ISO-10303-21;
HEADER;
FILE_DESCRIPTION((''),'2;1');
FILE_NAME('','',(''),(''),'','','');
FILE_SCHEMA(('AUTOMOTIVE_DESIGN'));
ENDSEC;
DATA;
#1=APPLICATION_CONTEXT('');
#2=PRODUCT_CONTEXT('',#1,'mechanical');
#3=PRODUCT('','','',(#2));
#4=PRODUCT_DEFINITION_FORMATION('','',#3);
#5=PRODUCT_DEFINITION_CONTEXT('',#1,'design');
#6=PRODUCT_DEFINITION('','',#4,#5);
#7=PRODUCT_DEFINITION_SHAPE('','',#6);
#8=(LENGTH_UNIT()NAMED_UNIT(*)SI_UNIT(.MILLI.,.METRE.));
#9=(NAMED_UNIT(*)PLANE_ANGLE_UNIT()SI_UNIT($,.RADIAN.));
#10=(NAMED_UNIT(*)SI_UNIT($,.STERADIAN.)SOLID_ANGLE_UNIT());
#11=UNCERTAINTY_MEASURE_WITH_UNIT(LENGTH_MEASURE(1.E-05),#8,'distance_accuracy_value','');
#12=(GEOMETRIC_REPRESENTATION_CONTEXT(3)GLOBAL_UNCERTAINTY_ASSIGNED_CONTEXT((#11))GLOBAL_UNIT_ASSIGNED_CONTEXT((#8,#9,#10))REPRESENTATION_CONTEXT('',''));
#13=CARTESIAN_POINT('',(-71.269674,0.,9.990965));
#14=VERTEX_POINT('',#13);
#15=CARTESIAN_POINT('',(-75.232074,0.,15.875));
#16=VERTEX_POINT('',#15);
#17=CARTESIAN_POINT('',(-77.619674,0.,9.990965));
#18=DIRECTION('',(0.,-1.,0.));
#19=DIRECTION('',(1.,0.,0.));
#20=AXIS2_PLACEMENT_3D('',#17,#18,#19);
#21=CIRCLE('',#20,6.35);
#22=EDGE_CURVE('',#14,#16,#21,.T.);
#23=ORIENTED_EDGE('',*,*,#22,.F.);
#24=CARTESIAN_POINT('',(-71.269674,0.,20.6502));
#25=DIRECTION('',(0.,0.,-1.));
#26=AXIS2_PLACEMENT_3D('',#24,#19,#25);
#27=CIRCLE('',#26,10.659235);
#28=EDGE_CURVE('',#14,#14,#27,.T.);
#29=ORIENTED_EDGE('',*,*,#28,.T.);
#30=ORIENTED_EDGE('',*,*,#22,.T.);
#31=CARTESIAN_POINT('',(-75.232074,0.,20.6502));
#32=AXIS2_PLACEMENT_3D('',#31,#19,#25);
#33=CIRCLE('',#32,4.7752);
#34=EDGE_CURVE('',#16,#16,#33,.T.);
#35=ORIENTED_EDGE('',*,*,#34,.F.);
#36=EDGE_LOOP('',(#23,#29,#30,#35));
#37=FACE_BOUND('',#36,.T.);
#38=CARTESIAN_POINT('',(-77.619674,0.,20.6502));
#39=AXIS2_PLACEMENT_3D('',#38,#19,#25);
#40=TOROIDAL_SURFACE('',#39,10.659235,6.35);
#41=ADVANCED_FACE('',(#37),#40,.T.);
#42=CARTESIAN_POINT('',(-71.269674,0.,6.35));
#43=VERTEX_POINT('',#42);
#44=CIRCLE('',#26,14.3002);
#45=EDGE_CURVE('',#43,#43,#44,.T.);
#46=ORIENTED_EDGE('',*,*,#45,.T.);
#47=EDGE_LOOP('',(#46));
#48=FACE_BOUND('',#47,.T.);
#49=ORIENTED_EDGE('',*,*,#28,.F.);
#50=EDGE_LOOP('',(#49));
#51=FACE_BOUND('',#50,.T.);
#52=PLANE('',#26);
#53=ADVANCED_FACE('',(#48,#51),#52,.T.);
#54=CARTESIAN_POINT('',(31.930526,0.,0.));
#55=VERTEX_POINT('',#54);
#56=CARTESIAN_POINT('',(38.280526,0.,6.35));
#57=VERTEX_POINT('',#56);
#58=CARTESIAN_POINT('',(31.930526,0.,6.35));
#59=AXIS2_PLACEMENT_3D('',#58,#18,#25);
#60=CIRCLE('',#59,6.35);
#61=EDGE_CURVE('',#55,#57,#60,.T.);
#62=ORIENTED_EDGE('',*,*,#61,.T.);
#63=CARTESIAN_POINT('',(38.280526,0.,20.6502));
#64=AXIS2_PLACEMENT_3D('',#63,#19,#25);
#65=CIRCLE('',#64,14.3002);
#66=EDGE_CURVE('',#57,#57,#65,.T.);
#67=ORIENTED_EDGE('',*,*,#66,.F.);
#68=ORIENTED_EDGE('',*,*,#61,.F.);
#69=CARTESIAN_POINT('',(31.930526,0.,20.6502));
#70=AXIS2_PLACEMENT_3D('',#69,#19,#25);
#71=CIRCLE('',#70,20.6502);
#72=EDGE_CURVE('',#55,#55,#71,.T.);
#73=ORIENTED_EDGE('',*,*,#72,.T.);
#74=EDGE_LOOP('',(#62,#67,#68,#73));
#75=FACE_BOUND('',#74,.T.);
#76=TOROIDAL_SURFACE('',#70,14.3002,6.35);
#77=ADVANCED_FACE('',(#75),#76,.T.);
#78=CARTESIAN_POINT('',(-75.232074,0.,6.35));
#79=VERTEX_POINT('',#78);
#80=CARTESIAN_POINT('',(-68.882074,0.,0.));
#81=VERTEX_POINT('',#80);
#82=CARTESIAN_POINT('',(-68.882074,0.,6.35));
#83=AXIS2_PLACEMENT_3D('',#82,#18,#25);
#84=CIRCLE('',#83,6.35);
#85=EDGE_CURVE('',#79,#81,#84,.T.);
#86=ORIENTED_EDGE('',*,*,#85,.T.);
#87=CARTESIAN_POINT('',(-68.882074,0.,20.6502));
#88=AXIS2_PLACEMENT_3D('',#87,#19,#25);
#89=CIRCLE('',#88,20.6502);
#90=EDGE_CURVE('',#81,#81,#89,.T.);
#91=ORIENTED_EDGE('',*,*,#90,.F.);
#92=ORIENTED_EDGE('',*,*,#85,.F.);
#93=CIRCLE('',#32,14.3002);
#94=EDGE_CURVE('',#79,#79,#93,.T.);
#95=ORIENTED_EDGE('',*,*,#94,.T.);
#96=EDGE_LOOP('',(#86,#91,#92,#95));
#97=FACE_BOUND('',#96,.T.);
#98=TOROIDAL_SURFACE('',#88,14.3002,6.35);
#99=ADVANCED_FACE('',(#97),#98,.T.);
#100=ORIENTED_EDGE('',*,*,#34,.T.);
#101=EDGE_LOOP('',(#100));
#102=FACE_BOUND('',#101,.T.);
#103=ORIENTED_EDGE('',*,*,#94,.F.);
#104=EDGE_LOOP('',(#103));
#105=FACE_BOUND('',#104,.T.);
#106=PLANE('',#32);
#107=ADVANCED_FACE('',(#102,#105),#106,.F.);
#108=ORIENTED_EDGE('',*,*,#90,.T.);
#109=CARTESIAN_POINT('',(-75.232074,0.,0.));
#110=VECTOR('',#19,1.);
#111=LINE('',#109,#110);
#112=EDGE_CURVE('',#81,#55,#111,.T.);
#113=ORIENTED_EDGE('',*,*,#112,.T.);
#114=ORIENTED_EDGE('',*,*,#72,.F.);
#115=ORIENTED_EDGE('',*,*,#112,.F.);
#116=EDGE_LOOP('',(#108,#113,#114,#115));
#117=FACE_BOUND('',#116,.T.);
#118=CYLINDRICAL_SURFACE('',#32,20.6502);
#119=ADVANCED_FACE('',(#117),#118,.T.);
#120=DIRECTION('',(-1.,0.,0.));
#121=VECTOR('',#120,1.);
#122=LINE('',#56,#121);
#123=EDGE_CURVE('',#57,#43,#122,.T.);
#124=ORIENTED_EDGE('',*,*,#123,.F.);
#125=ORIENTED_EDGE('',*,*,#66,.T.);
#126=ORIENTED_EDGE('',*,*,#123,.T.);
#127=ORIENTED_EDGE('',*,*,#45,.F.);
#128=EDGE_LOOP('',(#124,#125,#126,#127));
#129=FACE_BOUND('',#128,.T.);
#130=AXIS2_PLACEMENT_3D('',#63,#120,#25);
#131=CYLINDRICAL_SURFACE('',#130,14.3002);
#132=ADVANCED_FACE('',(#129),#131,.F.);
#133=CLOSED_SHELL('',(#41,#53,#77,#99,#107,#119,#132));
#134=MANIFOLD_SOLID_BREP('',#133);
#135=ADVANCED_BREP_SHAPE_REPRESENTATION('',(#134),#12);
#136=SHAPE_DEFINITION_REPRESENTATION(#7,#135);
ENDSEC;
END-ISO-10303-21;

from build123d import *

# Parameters (mm, degrees)
F3_R = 6.35


# Not quite as in the source:
# - a fillet or chamfer that OpenCascade refuses, or shapes differently, is made with other operations: its cross-section is extruded or revolved along the edge and cut away or added


with BuildPart() as f1:
    # F0 (on Front) → F1 (revolve)
    with BuildSketch(Plane.XZ):
        Polygon((-75.2320736647, 15.875), (-75.2320736647, 0), (38.2805263353, 0), (38.2805263353, 6.35), (-71.0156736647, 6.35), (-71.2696736647, 6.35), (-71.2696736647, 15.875), align=None)
    revolve(axis=Axis((-17.1681363136, 0, 20.6502), (1, 0, 0)))

    # F2: fillet of radius 6.35 on 2 edges, made by hand

    # F2_s1 → F2_t2 (revolve, cut)
    with BuildSketch(Plane.XZ):
        with BuildLine():
            ThreePointArc((31.9305263353, 0), (36.4206543959, 1.8598719395), (38.2805263353, 6.35))
            Line((38.2805263353, 6.35), (38.2805263353, 0))
            Line((38.2805263353, 0), (31.9305263353, 0))
        make_face()
    revolve(axis=Axis((38.2805263353, 0, 20.6502), (1, 0, 0)), mode=Mode.SUBTRACT)

    # F2_s3 → F2_t4 (revolve, cut)
    with BuildSketch(Plane.XZ):
        with BuildLine():
            ThreePointArc((-71.2696736647, 9.9909651395), (-72.3526175609, 13.5378821106), (-75.2320736647, 15.875))
            Line((-75.2320736647, 15.875), (-71.2696736647, 15.875))
            Line((-71.2696736647, 15.875), (-71.2696736647, 9.9909651395))
        make_face()
    revolve(axis=Axis((-71.2696736647, 0, 20.6502), (1, 0, 0)), mode=Mode.SUBTRACT)

    # F3
    f3_edges = [f1.edges().sort_by_distance(p)[0] for p in [
        (-75.232074, 0, 41.3004),
    ]]
    fillet(f3_edges, radius=F3_R)


solid = f1.part
